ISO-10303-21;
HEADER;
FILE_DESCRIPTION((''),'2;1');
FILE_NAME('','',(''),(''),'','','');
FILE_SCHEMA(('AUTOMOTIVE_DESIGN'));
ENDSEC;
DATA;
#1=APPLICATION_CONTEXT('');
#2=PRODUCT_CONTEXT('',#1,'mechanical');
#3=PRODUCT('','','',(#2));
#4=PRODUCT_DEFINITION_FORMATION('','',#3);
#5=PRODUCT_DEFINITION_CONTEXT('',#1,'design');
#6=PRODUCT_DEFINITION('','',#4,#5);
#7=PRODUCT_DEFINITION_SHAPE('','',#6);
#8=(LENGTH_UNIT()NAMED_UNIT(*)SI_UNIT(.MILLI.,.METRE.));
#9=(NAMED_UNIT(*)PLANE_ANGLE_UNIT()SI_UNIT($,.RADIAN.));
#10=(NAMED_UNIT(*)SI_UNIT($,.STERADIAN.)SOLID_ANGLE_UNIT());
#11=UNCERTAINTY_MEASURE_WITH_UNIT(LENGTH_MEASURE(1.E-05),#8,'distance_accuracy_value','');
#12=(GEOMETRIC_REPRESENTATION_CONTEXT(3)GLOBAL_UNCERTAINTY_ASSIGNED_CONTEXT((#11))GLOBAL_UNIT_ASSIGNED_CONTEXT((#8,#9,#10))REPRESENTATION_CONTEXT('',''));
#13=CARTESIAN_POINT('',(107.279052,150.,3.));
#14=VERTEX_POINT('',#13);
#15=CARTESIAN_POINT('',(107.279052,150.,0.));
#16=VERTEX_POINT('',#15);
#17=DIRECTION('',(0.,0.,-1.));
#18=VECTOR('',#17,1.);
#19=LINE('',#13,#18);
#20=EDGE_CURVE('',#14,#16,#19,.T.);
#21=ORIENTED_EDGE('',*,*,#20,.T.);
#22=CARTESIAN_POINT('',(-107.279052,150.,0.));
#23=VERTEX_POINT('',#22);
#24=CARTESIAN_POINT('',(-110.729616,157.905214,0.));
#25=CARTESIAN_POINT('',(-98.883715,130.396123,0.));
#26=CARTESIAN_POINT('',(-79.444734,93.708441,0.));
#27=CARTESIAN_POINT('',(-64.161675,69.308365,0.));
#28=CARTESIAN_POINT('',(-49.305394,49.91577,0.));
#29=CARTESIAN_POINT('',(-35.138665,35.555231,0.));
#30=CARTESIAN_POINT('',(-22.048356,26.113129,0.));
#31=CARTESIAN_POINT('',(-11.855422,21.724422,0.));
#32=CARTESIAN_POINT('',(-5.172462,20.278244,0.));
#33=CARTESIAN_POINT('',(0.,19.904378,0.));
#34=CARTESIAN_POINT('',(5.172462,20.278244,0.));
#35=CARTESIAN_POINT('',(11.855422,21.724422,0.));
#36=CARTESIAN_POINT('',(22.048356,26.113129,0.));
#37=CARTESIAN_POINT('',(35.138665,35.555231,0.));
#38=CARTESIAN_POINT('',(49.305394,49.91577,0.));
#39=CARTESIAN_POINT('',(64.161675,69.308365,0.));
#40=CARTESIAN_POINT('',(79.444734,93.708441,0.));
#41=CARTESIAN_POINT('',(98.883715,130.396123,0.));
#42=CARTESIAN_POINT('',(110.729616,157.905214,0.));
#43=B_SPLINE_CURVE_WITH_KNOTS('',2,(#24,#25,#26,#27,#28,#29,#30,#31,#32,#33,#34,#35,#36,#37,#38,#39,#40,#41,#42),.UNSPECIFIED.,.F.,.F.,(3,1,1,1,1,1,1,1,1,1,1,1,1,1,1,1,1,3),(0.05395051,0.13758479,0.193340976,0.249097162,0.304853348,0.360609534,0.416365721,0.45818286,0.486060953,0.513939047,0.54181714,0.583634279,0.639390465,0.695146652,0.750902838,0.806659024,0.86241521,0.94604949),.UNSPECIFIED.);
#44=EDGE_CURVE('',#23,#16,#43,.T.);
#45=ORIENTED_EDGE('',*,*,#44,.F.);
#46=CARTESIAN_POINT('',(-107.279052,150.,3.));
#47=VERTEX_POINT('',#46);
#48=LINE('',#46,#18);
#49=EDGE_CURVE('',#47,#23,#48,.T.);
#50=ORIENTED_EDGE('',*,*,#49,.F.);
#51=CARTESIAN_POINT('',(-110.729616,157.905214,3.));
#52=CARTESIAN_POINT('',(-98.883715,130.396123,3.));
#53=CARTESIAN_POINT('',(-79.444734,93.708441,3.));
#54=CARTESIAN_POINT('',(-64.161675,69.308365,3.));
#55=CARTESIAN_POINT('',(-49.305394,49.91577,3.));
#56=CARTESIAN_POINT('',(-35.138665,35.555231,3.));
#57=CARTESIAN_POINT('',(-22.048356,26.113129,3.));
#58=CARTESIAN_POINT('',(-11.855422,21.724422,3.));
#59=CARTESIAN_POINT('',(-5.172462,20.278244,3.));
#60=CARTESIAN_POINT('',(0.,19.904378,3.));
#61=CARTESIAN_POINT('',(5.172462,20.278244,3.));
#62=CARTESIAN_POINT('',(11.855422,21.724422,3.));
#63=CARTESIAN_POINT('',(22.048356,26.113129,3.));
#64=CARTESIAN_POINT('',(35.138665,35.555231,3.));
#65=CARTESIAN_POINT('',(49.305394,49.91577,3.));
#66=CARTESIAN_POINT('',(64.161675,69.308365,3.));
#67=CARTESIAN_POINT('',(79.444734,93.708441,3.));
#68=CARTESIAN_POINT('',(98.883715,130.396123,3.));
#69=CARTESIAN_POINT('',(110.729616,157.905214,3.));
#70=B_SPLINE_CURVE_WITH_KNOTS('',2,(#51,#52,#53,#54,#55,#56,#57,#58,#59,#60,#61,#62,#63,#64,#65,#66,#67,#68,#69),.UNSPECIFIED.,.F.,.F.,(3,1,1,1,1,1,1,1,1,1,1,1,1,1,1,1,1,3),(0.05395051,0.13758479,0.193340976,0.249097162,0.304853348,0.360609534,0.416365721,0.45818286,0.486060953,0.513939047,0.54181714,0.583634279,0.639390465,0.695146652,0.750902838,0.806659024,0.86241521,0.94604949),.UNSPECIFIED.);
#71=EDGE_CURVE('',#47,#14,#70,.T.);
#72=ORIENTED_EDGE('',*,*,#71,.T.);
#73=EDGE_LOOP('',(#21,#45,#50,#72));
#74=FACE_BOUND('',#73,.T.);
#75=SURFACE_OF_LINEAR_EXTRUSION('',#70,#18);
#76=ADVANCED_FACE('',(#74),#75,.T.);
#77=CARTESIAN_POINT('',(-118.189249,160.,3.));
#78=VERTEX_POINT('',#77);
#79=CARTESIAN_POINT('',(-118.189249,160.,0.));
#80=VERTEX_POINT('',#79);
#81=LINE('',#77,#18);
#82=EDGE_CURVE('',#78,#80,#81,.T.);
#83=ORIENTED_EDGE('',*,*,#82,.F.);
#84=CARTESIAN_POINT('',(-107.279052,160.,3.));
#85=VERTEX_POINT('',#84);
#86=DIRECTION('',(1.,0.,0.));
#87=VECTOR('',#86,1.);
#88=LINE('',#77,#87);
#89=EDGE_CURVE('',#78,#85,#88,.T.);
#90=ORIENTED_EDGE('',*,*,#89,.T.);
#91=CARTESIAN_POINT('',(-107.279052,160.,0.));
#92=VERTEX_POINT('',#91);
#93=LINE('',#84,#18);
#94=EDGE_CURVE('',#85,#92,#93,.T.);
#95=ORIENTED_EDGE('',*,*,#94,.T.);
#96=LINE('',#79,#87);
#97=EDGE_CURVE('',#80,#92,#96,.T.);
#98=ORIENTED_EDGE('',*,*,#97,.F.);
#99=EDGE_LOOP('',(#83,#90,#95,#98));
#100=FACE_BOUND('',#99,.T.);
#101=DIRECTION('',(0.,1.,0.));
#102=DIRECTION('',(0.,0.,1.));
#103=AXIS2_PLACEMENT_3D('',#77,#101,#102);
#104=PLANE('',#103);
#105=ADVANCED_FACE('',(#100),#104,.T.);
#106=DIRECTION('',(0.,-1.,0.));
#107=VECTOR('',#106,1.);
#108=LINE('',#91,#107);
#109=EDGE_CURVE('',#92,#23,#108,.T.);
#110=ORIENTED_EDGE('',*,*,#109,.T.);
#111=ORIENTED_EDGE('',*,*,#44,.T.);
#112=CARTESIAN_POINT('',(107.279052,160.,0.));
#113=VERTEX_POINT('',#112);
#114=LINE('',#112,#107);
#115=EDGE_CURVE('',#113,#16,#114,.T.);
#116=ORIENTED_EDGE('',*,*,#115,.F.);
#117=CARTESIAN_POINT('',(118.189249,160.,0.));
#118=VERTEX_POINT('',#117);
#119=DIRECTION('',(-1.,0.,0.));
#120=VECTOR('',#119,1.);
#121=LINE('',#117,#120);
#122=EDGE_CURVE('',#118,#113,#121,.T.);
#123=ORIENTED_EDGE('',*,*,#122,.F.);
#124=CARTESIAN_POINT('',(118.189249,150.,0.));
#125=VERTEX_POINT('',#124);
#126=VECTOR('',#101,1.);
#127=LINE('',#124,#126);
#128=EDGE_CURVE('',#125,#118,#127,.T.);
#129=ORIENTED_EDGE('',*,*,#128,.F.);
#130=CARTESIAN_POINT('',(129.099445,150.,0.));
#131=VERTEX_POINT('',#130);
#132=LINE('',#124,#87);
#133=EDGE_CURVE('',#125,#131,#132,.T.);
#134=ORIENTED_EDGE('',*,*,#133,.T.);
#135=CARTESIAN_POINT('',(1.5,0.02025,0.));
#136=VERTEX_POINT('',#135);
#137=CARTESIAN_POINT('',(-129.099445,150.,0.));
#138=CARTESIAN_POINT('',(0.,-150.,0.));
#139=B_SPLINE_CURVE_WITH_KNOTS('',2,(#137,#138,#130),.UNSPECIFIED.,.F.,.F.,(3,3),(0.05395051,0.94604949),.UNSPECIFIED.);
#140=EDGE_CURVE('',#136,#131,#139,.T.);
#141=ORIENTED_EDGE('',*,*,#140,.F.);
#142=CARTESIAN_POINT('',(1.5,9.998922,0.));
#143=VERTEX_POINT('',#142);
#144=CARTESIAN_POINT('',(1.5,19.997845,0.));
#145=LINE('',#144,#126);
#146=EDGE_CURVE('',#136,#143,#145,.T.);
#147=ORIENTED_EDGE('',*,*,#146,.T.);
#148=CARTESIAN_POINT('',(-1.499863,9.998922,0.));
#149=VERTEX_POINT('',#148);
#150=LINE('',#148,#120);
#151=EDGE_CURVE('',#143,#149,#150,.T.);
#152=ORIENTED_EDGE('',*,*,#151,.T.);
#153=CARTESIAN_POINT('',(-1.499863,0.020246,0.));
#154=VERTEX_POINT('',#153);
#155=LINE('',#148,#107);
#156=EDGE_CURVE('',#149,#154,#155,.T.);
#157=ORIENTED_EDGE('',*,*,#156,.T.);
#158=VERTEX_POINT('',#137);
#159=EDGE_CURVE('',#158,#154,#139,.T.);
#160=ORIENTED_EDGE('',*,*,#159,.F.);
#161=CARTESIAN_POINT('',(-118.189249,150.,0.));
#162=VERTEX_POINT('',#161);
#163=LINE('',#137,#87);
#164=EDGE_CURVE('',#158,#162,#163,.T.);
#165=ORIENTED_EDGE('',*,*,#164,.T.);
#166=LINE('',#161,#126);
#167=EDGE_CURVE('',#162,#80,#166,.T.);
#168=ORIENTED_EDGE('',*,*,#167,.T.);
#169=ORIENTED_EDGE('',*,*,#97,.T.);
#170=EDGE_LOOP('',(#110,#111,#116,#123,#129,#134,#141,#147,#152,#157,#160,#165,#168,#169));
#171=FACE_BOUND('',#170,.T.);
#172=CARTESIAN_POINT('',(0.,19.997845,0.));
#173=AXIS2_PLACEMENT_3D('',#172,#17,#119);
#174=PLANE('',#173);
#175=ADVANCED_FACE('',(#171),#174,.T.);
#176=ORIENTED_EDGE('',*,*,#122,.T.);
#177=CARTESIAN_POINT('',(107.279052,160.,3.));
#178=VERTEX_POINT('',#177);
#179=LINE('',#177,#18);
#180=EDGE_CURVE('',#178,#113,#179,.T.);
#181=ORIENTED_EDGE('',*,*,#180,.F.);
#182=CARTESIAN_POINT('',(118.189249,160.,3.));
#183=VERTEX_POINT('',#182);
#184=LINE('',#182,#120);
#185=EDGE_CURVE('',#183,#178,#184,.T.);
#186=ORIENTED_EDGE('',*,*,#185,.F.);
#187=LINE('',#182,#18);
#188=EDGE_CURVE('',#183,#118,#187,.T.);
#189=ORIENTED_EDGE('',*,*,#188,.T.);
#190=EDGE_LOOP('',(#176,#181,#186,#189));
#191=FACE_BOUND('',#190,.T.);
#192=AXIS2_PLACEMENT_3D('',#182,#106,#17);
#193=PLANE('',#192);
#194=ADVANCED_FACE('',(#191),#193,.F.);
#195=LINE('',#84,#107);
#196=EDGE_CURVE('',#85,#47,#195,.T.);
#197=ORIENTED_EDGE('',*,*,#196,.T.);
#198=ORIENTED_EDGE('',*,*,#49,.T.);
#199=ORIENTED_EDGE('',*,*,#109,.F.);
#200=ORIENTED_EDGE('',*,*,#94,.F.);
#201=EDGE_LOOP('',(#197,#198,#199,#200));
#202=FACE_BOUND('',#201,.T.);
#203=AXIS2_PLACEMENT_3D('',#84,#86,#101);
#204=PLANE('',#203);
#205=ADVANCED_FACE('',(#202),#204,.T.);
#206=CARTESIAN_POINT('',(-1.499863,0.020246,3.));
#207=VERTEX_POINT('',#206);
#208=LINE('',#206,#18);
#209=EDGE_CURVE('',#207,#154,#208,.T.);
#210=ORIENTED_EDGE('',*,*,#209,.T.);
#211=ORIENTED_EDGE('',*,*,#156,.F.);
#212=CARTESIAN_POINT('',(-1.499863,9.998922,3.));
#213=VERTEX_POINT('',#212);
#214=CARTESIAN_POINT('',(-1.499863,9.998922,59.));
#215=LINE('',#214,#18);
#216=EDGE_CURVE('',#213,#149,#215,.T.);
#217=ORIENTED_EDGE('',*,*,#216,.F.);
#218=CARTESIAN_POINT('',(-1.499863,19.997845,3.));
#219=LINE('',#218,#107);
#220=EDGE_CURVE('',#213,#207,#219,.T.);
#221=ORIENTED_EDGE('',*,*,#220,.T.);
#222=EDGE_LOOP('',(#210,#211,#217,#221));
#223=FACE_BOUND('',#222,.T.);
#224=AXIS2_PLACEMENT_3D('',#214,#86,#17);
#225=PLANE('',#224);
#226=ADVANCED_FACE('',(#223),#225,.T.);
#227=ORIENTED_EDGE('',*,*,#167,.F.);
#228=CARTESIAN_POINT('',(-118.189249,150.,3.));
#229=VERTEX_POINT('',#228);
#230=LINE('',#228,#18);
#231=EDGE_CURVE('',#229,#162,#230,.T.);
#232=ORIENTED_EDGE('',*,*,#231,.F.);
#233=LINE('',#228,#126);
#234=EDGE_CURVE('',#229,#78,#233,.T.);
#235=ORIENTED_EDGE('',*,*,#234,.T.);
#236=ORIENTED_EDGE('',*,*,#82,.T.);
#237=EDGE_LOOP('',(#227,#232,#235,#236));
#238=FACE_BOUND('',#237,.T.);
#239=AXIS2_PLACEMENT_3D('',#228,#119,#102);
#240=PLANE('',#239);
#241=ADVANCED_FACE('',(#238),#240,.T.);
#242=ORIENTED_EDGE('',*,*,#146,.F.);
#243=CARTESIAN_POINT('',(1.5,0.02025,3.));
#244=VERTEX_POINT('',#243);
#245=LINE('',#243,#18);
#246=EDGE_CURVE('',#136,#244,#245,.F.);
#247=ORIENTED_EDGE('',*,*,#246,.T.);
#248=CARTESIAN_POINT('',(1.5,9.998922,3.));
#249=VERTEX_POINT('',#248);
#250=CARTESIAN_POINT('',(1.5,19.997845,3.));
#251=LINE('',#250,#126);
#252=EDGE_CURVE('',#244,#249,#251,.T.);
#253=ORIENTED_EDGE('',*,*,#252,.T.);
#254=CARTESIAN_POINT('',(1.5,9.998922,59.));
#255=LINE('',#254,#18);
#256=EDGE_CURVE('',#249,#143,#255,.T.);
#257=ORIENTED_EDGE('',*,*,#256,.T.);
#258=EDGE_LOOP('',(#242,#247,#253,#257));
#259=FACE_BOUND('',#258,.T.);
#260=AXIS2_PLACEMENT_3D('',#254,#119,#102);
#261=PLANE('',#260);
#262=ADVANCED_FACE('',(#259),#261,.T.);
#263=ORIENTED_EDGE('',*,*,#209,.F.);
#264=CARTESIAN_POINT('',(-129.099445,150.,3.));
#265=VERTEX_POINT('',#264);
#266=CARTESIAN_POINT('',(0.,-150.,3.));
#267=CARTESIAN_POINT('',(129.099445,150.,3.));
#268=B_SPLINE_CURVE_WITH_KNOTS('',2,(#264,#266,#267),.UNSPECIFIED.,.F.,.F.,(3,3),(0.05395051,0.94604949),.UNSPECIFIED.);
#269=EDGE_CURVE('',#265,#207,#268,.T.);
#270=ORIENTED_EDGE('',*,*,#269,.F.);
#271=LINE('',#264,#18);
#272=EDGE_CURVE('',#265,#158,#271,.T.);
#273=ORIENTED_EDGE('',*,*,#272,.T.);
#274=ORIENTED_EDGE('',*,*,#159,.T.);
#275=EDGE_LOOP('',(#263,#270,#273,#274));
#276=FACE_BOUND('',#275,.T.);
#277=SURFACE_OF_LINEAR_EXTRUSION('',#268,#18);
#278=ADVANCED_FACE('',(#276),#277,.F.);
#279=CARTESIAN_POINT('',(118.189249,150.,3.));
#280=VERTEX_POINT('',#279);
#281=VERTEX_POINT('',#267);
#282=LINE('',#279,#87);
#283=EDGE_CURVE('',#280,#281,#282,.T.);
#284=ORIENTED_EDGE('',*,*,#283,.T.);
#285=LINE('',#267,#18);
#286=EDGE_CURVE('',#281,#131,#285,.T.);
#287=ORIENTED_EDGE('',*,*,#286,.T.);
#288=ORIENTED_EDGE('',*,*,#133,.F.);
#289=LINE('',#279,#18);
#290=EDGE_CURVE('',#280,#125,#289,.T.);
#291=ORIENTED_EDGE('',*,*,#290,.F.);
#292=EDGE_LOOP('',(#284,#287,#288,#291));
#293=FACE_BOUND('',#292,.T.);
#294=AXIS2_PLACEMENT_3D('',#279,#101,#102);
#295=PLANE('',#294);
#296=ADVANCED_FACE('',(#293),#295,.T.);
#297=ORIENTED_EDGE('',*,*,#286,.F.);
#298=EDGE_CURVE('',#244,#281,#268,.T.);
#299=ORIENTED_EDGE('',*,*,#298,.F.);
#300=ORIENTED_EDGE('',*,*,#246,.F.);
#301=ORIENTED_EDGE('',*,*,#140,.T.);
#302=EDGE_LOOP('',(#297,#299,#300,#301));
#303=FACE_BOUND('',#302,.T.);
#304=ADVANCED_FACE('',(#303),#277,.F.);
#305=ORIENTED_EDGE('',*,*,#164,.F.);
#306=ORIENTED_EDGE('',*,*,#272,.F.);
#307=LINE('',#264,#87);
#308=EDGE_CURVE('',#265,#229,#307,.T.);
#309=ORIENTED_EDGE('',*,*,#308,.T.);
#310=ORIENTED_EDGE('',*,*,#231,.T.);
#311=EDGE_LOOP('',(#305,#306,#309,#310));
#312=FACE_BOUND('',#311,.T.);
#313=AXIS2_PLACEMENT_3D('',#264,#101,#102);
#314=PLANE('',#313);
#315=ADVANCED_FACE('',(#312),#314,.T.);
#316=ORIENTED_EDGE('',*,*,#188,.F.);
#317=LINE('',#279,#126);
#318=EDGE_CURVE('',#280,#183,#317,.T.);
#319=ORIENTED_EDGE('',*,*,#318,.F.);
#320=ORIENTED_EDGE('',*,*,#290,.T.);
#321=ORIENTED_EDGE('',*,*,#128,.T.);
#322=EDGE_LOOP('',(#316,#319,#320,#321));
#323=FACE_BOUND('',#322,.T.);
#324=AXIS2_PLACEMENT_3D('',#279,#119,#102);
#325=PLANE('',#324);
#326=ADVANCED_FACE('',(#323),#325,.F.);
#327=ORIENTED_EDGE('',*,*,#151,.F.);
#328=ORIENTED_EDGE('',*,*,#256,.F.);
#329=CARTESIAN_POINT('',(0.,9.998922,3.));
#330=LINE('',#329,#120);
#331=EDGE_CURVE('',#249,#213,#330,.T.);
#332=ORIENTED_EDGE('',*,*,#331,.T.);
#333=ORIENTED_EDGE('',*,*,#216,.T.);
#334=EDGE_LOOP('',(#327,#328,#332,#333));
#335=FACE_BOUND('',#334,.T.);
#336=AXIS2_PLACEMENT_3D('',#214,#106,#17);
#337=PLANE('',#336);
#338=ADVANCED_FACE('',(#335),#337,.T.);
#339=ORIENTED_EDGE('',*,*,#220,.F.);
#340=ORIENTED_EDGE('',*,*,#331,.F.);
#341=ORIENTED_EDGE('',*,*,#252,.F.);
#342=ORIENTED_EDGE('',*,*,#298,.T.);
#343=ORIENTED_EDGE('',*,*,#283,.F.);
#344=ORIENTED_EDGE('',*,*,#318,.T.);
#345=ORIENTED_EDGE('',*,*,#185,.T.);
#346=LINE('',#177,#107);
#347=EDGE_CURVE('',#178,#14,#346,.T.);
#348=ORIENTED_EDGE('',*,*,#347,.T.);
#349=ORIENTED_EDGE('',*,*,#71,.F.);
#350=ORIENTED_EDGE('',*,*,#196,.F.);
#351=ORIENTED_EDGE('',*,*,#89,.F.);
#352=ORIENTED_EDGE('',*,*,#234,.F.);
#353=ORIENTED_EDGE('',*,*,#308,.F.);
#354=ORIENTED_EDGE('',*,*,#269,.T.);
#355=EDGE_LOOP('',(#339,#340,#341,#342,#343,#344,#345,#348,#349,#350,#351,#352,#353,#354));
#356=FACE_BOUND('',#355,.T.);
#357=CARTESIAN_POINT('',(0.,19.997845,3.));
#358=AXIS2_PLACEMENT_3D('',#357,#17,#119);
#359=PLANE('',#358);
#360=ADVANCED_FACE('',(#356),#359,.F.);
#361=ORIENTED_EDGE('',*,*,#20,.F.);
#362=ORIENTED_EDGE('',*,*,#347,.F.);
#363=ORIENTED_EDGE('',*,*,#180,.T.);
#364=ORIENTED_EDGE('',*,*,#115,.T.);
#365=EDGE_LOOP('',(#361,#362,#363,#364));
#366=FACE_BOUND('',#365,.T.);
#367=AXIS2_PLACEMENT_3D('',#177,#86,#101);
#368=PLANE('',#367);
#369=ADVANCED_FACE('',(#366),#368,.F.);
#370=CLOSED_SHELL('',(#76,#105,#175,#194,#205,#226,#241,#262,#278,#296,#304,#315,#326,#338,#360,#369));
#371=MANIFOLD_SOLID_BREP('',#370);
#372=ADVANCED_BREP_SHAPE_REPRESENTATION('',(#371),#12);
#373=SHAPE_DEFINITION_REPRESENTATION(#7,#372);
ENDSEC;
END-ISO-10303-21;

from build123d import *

# Parameters (mm, degrees)
BOSS_EXTRUDE1_DEPTH = 3
SKETCH4_W           = 2.999863356
SKETCH4_H           = 9.998922379
CUT_EXTRUDE1_DEPTH  = 59


# Read off the part's stored shape, not the designer's step: Boss-Extrude1
with BuildPart() as part:
    # Boss-Extrude1 outline → Boss-Extrude1 (new body)
    with BuildSketch(Plane.XY):
        with BuildLine():
            Line((-118.189248577, 160.000000006), (-118.189248577, 150.000000006))
            Line((-118.189248577, 150.000000006), (-129.099444876, 150.000000006))
            add(Edge.make_bspline(
                [(-129.099444876, 150.000000006), (-3e-09, -149.999999999), (129.099444871, 149.999999993)],
                knots=[0.05395051, 0.05395051, 0.05395051, 0.94604949, 0.94604949, 0.94604949], degree=2))
            Line((129.099444871, 149.999999993), (118.189248572, 149.999999993))
            Line((118.189248572, 149.999999993), (118.189248572, 159.999999993))
            Line((118.189248572, 159.999999993), (107.279052273, 159.999999993))
            Line((107.279052273, 159.999999993), (107.279052273, 149.999999993))
            add(Edge.make_bspline(
                [(-107.279052278, 150.000000004), (-97.183104825, 127.186517466), (-79.444733684, 93.708440604), (-64.161675128, 69.308365489), (-49.305393546, 49.915770109), (-35.13866486, 35.555231256), (-22.048355535, 26.113129248), (-11.855422137, 21.724421759), (-5.17246227, 20.278244385), (-2e-09, 19.904378215), (5.172462266, 20.278244384), (11.855422133, 21.724421758), (22.048355531, 26.113129246), (35.138664855, 35.555231252), (49.305393541, 49.915770103), (64.161675123, 69.308365482), (79.444733679, 93.708440595), (97.18310482, 127.186517456), (107.279052273, 149.999999993)],
                knots=[0.066145022, 0.066145022, 0.066145022, 0.13758479, 0.193340976, 0.249097162, 0.304853348, 0.360609534, 0.416365721, 0.45818286, 0.486060953, 0.513939047, 0.54181714, 0.583634279, 0.639390465, 0.695146652, 0.750902838, 0.806659024, 0.86241521, 0.933854978, 0.933854978, 0.933854978], degree=2))
            Line((-107.279052278, 150.000000004), (-107.279052278, 160.000000006))
            Line((-107.279052278, 160.000000006), (-118.189248577, 160.000000006))
        make_face()
    extrude(amount=BOSS_EXTRUDE1_DEPTH)

    # Sketch4 → Cut-Extrude1 (cut)
    with BuildSketch(Plane.XY):
        with Locations((6.8322e-05, 4.99946119)):
            Rectangle(SKETCH4_W, SKETCH4_H)
    extrude(amount=CUT_EXTRUDE1_DEPTH, mode=Mode.SUBTRACT)


solid = part.part
